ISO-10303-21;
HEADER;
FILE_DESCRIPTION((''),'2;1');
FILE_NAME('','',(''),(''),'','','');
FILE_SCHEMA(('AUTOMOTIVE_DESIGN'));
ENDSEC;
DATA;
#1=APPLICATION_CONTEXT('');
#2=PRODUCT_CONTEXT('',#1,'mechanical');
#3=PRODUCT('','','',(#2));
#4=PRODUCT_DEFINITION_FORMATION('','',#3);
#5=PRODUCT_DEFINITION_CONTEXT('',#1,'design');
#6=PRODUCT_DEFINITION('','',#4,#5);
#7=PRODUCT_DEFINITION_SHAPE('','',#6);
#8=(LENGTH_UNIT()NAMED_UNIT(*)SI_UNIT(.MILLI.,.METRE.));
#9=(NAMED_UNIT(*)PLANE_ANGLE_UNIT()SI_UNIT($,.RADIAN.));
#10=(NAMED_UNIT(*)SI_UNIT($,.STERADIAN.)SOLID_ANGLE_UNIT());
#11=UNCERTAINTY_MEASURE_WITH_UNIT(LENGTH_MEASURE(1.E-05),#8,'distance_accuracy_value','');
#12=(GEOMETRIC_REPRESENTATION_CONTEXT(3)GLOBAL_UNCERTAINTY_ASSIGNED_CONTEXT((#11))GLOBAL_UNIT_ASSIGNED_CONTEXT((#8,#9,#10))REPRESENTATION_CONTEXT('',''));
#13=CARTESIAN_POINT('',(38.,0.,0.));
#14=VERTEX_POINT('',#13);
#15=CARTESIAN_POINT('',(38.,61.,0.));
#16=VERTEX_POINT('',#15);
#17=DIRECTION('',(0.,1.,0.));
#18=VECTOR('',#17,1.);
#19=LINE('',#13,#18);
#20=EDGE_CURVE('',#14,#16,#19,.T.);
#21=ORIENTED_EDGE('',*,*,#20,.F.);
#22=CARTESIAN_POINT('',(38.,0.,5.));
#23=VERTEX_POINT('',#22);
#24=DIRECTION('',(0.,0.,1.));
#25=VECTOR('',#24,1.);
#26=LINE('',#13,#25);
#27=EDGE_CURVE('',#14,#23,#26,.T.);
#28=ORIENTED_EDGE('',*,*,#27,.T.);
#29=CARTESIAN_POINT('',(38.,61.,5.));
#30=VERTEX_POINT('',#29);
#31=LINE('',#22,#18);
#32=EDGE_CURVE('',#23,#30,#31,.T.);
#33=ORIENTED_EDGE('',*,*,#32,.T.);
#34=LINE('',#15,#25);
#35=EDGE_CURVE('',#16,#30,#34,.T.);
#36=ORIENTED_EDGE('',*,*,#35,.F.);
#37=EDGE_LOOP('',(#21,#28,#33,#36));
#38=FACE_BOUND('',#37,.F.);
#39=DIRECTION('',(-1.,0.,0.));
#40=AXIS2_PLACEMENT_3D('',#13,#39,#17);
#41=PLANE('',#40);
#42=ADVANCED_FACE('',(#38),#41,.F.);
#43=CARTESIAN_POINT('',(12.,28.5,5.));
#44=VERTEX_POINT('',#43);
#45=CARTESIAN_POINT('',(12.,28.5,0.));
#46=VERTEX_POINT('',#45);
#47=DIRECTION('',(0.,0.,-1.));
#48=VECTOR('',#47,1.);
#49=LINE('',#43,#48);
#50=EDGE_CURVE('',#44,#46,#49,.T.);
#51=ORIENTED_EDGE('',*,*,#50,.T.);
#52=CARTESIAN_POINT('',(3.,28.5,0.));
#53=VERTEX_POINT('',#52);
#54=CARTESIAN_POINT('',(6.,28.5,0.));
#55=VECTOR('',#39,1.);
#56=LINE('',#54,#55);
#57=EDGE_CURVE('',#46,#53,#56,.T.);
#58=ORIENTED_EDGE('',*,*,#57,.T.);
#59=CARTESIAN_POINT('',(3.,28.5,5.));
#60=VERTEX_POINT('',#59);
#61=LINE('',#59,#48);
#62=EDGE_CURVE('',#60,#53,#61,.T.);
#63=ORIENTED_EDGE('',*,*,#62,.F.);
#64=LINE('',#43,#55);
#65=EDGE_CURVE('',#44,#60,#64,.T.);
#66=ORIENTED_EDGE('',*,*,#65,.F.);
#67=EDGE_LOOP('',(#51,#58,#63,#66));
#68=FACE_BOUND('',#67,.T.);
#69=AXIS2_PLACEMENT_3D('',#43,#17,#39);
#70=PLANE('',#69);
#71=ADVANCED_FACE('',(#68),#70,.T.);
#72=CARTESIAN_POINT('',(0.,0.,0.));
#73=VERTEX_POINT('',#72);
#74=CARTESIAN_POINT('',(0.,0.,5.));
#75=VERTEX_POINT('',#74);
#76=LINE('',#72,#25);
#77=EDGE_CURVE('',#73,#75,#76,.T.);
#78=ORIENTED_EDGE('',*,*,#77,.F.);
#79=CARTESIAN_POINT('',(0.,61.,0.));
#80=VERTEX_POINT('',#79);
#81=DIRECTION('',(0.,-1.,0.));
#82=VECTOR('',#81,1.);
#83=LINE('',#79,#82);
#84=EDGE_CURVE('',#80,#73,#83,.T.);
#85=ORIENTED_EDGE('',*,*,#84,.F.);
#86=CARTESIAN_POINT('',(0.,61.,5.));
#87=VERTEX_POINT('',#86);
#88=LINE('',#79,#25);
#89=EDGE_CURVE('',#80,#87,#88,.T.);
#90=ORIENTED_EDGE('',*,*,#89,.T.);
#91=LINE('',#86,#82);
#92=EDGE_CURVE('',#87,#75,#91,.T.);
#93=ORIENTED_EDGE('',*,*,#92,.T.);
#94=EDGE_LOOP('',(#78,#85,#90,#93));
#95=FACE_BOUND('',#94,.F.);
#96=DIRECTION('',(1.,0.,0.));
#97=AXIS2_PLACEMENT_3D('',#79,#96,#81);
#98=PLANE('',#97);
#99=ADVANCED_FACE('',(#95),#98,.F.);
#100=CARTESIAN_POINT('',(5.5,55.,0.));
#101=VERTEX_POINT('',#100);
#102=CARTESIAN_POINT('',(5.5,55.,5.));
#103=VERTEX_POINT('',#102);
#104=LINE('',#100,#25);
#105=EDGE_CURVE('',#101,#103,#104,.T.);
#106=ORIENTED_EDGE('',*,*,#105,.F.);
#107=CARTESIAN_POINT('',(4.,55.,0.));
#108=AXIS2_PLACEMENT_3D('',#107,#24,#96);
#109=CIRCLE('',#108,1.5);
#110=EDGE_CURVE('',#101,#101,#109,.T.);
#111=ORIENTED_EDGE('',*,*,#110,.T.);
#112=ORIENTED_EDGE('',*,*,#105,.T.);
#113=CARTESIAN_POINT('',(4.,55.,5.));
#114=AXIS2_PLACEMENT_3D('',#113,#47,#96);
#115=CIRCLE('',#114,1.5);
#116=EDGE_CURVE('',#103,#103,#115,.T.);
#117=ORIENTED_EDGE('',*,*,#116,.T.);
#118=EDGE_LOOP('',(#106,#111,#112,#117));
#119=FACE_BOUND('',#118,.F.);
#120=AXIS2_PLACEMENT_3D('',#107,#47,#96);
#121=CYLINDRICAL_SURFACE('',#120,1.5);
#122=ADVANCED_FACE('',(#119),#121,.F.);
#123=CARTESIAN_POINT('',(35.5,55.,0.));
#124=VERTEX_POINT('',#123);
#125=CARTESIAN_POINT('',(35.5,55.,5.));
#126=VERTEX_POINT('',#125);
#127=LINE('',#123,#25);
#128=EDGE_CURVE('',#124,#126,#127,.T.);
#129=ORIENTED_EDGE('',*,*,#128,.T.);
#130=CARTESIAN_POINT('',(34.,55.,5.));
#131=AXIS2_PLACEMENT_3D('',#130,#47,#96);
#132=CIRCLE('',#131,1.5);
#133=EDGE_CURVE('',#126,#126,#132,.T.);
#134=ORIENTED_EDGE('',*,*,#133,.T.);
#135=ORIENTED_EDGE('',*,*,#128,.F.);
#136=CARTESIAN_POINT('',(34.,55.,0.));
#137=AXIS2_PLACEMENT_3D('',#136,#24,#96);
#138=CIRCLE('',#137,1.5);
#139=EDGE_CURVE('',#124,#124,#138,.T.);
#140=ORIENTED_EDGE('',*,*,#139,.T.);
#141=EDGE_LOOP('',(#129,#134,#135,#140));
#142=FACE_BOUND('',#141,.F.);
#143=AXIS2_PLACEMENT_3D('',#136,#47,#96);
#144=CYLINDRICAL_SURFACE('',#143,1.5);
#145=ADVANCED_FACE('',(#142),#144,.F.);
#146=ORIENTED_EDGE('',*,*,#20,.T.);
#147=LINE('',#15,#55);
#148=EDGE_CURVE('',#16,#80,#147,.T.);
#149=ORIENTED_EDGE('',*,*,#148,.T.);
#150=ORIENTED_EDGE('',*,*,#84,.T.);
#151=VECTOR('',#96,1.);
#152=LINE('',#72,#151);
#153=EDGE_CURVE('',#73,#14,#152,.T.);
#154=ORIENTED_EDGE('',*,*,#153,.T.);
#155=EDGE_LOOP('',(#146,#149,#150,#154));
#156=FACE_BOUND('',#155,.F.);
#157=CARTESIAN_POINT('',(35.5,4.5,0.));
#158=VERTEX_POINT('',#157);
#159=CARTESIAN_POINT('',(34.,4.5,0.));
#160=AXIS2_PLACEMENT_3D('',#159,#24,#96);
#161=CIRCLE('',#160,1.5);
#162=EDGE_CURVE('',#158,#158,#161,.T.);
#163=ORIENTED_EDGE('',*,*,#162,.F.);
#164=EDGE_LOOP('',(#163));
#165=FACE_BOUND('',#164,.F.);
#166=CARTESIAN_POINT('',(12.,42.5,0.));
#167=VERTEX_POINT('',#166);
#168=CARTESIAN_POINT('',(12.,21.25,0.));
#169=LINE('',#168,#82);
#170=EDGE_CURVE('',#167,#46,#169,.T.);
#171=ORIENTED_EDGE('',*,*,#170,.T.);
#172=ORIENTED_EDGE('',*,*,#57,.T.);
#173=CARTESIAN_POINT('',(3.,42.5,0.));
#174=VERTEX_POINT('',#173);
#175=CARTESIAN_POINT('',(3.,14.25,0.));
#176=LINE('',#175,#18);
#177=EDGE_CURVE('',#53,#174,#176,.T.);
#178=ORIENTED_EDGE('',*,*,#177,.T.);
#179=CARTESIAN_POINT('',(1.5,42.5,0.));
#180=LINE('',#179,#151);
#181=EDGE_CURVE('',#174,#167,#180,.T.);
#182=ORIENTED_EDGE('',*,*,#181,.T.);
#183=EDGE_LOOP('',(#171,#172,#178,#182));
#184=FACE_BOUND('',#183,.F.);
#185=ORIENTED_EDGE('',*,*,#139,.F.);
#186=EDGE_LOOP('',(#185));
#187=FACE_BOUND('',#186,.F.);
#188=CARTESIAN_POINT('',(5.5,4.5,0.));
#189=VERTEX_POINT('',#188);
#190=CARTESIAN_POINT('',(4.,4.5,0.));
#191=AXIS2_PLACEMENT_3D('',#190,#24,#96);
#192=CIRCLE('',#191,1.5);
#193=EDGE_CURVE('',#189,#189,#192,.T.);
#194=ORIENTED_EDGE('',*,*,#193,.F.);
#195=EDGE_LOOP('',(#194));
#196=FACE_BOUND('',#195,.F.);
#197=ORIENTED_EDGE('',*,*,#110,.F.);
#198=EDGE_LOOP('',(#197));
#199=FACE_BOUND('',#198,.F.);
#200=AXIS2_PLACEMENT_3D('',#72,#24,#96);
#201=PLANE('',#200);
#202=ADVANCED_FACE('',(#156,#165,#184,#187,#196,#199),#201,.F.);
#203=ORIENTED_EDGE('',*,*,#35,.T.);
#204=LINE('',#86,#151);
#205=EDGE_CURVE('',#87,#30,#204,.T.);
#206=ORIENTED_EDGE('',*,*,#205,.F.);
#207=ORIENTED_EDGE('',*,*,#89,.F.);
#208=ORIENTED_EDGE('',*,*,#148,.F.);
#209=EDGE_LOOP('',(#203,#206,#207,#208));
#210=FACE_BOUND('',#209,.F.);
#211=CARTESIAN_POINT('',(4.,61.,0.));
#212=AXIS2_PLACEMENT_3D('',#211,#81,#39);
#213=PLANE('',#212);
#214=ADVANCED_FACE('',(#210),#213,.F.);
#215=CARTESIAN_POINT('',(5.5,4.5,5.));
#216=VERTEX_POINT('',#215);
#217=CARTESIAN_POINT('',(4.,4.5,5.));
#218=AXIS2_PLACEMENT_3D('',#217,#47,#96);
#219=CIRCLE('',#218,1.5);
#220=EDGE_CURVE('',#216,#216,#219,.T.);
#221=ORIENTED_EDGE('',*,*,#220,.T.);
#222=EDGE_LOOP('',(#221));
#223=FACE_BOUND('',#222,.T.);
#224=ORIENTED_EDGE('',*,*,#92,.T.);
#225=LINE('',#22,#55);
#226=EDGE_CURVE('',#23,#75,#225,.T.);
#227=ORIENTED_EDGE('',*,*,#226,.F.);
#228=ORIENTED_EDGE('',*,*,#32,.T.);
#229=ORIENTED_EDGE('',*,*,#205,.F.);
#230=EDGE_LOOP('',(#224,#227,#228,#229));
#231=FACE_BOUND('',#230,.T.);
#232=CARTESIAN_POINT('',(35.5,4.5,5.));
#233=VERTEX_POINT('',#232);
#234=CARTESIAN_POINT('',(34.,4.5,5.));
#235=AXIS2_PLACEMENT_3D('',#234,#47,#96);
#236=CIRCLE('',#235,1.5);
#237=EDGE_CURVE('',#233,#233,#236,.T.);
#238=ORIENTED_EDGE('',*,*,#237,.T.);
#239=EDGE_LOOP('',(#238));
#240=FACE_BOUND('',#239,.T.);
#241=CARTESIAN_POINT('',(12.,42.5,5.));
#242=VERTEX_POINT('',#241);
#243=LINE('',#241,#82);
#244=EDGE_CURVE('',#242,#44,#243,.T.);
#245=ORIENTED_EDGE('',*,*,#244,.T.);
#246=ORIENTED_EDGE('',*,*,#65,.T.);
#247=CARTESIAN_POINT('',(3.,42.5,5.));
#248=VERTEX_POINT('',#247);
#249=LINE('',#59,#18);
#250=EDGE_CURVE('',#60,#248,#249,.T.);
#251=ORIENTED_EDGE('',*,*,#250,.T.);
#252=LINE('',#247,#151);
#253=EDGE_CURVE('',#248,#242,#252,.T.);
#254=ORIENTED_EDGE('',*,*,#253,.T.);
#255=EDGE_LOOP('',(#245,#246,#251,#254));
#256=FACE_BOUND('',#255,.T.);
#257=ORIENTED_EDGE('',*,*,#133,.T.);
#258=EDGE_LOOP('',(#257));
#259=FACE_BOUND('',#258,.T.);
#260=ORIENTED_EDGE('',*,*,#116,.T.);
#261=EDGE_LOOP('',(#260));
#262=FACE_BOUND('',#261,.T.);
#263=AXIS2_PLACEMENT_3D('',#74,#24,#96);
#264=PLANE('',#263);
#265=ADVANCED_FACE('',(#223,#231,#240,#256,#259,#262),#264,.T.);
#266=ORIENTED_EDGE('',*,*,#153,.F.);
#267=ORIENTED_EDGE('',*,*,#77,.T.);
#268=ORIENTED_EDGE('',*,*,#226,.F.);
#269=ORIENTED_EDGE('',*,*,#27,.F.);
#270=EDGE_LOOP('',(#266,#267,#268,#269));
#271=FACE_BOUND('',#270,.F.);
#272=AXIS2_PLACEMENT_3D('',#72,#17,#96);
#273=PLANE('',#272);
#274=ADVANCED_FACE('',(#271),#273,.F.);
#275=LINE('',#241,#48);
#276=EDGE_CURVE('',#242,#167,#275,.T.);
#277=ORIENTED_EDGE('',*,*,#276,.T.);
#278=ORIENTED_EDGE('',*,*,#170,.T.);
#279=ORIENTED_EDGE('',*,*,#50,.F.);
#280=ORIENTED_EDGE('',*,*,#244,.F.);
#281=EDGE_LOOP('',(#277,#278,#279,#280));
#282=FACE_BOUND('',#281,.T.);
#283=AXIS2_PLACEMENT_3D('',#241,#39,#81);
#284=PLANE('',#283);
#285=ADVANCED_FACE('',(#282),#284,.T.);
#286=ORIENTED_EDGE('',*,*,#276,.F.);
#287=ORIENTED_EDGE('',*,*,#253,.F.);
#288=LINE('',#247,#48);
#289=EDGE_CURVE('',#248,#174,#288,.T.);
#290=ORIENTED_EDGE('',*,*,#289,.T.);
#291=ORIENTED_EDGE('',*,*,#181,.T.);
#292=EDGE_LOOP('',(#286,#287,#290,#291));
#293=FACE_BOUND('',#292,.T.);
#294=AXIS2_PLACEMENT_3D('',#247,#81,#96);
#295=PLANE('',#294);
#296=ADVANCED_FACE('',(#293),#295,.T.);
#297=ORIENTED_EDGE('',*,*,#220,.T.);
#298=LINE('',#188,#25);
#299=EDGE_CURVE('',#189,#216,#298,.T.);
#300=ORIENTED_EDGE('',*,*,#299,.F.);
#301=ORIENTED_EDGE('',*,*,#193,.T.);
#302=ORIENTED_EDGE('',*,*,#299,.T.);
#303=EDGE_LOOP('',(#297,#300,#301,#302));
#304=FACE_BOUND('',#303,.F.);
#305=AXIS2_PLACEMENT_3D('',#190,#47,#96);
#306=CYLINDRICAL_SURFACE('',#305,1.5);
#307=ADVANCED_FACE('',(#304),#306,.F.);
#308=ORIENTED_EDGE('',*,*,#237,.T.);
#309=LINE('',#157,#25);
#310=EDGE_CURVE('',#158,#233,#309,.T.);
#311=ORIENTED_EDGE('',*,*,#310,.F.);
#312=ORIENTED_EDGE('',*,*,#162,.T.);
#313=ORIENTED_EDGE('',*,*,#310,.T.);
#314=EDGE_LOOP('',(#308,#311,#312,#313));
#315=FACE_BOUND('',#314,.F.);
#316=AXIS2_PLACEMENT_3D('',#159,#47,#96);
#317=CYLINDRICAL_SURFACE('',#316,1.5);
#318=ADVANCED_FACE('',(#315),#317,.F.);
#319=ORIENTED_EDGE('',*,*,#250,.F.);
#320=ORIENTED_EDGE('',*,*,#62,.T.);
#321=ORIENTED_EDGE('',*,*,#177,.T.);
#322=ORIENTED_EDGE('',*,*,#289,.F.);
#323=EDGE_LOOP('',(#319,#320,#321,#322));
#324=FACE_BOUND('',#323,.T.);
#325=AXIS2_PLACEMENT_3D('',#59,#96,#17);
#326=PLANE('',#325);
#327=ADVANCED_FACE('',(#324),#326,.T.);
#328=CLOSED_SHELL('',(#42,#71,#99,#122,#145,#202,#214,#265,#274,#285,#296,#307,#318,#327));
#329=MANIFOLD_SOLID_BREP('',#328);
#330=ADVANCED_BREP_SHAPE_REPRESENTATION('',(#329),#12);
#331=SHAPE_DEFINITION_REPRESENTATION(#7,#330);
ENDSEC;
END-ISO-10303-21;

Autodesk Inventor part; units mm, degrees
ref_plane "YZ Plane" through (0, 0, 0) normal (1, 0, 0) x (0, 1, 0)
ref_plane "XZ Plane" through (0, 0, 0) normal (0, 1, 0) x (-1, 0, 0)
ref_plane "XY Plane" through (0, 0, 0) normal (0, 0, 1) x (1, 0, 0)
sketch "Sketch1" plane through (0, 0, 0) normal (0, 0, 1) x (1, 0, 0)
  line L0 (0, 0) -> (38, 0)
  line L1 (38, 0) -> (38, 61)
  line L2 (38, 61) -> (0, 61)
  line L3 (0, 61) -> (0, 0)
  line L4 (0, 61) -> (4, 61)
  line L5 (4, 61) -> (4, 55)
  line L6 (38, 61) -> (34, 61)
  line L7 (34, 61) -> (34, 55)
  line L8 (38, 0) -> (34, 0)
  line L9 (34, 0) -> (34, 4.5)
  line L10 (0, 0) -> (4, 0)
  line L11 (4, 0) -> (4, 4.5)
  circle A0 centre (4, 4.5) radius 1.5
  circle A1 centre (34, 4.5) radius 1.5
  circle A2 centre (34, 55) radius 1.5
  circle A3 centre (4, 55) radius 1.5
  dimension "d0" = 38
  dimension "d1" = 61
  dimension "d2" = 4
  dimension "d3" = 6
  dimension "d4" = 4
  dimension "d5" = 6
  dimension "d6" = 4
  dimension "d7" = 4.5
  dimension "d8" = 4
  dimension "d9" = 4.5
  dimension "d10" = 3
  dimension "d11" = 3
  dimension "d12" = 3
  dimension "d13" = 3
extrude "Extrusion1" add sketch "Sketch1" along normal blind 5
sketch "Sketch2" plane through (0, 0, 5) normal (0, 0, 1) x (1, 0, 0)
  line L0 (38, 61) -> (0, 61) projected
  line L1 (0, 61) -> (3, 61)
  line L2 (3, 61) -> (3, 42.5)
  line L3 (3, 42.5) -> (12, 42.5)
  line L4 (12, 42.5) -> (12, 28.5)
  line L5 (12, 28.5) -> (3, 28.5)
  line L6 (3, 28.5) -> (3, 42.5)
  line L7 (3, 42.5) -> (3, 51.2798)
  point P0 (0, 0)
  dimension "d16" = 3
  dimension "d17" = 18.5
  dimension "d18" = 9
  dimension "d19" = 14
  dimension "d20" = 9
extrude "Extrusion2" cut sketch "Sketch2" against normal through all
properties part number "arm_1_case"
